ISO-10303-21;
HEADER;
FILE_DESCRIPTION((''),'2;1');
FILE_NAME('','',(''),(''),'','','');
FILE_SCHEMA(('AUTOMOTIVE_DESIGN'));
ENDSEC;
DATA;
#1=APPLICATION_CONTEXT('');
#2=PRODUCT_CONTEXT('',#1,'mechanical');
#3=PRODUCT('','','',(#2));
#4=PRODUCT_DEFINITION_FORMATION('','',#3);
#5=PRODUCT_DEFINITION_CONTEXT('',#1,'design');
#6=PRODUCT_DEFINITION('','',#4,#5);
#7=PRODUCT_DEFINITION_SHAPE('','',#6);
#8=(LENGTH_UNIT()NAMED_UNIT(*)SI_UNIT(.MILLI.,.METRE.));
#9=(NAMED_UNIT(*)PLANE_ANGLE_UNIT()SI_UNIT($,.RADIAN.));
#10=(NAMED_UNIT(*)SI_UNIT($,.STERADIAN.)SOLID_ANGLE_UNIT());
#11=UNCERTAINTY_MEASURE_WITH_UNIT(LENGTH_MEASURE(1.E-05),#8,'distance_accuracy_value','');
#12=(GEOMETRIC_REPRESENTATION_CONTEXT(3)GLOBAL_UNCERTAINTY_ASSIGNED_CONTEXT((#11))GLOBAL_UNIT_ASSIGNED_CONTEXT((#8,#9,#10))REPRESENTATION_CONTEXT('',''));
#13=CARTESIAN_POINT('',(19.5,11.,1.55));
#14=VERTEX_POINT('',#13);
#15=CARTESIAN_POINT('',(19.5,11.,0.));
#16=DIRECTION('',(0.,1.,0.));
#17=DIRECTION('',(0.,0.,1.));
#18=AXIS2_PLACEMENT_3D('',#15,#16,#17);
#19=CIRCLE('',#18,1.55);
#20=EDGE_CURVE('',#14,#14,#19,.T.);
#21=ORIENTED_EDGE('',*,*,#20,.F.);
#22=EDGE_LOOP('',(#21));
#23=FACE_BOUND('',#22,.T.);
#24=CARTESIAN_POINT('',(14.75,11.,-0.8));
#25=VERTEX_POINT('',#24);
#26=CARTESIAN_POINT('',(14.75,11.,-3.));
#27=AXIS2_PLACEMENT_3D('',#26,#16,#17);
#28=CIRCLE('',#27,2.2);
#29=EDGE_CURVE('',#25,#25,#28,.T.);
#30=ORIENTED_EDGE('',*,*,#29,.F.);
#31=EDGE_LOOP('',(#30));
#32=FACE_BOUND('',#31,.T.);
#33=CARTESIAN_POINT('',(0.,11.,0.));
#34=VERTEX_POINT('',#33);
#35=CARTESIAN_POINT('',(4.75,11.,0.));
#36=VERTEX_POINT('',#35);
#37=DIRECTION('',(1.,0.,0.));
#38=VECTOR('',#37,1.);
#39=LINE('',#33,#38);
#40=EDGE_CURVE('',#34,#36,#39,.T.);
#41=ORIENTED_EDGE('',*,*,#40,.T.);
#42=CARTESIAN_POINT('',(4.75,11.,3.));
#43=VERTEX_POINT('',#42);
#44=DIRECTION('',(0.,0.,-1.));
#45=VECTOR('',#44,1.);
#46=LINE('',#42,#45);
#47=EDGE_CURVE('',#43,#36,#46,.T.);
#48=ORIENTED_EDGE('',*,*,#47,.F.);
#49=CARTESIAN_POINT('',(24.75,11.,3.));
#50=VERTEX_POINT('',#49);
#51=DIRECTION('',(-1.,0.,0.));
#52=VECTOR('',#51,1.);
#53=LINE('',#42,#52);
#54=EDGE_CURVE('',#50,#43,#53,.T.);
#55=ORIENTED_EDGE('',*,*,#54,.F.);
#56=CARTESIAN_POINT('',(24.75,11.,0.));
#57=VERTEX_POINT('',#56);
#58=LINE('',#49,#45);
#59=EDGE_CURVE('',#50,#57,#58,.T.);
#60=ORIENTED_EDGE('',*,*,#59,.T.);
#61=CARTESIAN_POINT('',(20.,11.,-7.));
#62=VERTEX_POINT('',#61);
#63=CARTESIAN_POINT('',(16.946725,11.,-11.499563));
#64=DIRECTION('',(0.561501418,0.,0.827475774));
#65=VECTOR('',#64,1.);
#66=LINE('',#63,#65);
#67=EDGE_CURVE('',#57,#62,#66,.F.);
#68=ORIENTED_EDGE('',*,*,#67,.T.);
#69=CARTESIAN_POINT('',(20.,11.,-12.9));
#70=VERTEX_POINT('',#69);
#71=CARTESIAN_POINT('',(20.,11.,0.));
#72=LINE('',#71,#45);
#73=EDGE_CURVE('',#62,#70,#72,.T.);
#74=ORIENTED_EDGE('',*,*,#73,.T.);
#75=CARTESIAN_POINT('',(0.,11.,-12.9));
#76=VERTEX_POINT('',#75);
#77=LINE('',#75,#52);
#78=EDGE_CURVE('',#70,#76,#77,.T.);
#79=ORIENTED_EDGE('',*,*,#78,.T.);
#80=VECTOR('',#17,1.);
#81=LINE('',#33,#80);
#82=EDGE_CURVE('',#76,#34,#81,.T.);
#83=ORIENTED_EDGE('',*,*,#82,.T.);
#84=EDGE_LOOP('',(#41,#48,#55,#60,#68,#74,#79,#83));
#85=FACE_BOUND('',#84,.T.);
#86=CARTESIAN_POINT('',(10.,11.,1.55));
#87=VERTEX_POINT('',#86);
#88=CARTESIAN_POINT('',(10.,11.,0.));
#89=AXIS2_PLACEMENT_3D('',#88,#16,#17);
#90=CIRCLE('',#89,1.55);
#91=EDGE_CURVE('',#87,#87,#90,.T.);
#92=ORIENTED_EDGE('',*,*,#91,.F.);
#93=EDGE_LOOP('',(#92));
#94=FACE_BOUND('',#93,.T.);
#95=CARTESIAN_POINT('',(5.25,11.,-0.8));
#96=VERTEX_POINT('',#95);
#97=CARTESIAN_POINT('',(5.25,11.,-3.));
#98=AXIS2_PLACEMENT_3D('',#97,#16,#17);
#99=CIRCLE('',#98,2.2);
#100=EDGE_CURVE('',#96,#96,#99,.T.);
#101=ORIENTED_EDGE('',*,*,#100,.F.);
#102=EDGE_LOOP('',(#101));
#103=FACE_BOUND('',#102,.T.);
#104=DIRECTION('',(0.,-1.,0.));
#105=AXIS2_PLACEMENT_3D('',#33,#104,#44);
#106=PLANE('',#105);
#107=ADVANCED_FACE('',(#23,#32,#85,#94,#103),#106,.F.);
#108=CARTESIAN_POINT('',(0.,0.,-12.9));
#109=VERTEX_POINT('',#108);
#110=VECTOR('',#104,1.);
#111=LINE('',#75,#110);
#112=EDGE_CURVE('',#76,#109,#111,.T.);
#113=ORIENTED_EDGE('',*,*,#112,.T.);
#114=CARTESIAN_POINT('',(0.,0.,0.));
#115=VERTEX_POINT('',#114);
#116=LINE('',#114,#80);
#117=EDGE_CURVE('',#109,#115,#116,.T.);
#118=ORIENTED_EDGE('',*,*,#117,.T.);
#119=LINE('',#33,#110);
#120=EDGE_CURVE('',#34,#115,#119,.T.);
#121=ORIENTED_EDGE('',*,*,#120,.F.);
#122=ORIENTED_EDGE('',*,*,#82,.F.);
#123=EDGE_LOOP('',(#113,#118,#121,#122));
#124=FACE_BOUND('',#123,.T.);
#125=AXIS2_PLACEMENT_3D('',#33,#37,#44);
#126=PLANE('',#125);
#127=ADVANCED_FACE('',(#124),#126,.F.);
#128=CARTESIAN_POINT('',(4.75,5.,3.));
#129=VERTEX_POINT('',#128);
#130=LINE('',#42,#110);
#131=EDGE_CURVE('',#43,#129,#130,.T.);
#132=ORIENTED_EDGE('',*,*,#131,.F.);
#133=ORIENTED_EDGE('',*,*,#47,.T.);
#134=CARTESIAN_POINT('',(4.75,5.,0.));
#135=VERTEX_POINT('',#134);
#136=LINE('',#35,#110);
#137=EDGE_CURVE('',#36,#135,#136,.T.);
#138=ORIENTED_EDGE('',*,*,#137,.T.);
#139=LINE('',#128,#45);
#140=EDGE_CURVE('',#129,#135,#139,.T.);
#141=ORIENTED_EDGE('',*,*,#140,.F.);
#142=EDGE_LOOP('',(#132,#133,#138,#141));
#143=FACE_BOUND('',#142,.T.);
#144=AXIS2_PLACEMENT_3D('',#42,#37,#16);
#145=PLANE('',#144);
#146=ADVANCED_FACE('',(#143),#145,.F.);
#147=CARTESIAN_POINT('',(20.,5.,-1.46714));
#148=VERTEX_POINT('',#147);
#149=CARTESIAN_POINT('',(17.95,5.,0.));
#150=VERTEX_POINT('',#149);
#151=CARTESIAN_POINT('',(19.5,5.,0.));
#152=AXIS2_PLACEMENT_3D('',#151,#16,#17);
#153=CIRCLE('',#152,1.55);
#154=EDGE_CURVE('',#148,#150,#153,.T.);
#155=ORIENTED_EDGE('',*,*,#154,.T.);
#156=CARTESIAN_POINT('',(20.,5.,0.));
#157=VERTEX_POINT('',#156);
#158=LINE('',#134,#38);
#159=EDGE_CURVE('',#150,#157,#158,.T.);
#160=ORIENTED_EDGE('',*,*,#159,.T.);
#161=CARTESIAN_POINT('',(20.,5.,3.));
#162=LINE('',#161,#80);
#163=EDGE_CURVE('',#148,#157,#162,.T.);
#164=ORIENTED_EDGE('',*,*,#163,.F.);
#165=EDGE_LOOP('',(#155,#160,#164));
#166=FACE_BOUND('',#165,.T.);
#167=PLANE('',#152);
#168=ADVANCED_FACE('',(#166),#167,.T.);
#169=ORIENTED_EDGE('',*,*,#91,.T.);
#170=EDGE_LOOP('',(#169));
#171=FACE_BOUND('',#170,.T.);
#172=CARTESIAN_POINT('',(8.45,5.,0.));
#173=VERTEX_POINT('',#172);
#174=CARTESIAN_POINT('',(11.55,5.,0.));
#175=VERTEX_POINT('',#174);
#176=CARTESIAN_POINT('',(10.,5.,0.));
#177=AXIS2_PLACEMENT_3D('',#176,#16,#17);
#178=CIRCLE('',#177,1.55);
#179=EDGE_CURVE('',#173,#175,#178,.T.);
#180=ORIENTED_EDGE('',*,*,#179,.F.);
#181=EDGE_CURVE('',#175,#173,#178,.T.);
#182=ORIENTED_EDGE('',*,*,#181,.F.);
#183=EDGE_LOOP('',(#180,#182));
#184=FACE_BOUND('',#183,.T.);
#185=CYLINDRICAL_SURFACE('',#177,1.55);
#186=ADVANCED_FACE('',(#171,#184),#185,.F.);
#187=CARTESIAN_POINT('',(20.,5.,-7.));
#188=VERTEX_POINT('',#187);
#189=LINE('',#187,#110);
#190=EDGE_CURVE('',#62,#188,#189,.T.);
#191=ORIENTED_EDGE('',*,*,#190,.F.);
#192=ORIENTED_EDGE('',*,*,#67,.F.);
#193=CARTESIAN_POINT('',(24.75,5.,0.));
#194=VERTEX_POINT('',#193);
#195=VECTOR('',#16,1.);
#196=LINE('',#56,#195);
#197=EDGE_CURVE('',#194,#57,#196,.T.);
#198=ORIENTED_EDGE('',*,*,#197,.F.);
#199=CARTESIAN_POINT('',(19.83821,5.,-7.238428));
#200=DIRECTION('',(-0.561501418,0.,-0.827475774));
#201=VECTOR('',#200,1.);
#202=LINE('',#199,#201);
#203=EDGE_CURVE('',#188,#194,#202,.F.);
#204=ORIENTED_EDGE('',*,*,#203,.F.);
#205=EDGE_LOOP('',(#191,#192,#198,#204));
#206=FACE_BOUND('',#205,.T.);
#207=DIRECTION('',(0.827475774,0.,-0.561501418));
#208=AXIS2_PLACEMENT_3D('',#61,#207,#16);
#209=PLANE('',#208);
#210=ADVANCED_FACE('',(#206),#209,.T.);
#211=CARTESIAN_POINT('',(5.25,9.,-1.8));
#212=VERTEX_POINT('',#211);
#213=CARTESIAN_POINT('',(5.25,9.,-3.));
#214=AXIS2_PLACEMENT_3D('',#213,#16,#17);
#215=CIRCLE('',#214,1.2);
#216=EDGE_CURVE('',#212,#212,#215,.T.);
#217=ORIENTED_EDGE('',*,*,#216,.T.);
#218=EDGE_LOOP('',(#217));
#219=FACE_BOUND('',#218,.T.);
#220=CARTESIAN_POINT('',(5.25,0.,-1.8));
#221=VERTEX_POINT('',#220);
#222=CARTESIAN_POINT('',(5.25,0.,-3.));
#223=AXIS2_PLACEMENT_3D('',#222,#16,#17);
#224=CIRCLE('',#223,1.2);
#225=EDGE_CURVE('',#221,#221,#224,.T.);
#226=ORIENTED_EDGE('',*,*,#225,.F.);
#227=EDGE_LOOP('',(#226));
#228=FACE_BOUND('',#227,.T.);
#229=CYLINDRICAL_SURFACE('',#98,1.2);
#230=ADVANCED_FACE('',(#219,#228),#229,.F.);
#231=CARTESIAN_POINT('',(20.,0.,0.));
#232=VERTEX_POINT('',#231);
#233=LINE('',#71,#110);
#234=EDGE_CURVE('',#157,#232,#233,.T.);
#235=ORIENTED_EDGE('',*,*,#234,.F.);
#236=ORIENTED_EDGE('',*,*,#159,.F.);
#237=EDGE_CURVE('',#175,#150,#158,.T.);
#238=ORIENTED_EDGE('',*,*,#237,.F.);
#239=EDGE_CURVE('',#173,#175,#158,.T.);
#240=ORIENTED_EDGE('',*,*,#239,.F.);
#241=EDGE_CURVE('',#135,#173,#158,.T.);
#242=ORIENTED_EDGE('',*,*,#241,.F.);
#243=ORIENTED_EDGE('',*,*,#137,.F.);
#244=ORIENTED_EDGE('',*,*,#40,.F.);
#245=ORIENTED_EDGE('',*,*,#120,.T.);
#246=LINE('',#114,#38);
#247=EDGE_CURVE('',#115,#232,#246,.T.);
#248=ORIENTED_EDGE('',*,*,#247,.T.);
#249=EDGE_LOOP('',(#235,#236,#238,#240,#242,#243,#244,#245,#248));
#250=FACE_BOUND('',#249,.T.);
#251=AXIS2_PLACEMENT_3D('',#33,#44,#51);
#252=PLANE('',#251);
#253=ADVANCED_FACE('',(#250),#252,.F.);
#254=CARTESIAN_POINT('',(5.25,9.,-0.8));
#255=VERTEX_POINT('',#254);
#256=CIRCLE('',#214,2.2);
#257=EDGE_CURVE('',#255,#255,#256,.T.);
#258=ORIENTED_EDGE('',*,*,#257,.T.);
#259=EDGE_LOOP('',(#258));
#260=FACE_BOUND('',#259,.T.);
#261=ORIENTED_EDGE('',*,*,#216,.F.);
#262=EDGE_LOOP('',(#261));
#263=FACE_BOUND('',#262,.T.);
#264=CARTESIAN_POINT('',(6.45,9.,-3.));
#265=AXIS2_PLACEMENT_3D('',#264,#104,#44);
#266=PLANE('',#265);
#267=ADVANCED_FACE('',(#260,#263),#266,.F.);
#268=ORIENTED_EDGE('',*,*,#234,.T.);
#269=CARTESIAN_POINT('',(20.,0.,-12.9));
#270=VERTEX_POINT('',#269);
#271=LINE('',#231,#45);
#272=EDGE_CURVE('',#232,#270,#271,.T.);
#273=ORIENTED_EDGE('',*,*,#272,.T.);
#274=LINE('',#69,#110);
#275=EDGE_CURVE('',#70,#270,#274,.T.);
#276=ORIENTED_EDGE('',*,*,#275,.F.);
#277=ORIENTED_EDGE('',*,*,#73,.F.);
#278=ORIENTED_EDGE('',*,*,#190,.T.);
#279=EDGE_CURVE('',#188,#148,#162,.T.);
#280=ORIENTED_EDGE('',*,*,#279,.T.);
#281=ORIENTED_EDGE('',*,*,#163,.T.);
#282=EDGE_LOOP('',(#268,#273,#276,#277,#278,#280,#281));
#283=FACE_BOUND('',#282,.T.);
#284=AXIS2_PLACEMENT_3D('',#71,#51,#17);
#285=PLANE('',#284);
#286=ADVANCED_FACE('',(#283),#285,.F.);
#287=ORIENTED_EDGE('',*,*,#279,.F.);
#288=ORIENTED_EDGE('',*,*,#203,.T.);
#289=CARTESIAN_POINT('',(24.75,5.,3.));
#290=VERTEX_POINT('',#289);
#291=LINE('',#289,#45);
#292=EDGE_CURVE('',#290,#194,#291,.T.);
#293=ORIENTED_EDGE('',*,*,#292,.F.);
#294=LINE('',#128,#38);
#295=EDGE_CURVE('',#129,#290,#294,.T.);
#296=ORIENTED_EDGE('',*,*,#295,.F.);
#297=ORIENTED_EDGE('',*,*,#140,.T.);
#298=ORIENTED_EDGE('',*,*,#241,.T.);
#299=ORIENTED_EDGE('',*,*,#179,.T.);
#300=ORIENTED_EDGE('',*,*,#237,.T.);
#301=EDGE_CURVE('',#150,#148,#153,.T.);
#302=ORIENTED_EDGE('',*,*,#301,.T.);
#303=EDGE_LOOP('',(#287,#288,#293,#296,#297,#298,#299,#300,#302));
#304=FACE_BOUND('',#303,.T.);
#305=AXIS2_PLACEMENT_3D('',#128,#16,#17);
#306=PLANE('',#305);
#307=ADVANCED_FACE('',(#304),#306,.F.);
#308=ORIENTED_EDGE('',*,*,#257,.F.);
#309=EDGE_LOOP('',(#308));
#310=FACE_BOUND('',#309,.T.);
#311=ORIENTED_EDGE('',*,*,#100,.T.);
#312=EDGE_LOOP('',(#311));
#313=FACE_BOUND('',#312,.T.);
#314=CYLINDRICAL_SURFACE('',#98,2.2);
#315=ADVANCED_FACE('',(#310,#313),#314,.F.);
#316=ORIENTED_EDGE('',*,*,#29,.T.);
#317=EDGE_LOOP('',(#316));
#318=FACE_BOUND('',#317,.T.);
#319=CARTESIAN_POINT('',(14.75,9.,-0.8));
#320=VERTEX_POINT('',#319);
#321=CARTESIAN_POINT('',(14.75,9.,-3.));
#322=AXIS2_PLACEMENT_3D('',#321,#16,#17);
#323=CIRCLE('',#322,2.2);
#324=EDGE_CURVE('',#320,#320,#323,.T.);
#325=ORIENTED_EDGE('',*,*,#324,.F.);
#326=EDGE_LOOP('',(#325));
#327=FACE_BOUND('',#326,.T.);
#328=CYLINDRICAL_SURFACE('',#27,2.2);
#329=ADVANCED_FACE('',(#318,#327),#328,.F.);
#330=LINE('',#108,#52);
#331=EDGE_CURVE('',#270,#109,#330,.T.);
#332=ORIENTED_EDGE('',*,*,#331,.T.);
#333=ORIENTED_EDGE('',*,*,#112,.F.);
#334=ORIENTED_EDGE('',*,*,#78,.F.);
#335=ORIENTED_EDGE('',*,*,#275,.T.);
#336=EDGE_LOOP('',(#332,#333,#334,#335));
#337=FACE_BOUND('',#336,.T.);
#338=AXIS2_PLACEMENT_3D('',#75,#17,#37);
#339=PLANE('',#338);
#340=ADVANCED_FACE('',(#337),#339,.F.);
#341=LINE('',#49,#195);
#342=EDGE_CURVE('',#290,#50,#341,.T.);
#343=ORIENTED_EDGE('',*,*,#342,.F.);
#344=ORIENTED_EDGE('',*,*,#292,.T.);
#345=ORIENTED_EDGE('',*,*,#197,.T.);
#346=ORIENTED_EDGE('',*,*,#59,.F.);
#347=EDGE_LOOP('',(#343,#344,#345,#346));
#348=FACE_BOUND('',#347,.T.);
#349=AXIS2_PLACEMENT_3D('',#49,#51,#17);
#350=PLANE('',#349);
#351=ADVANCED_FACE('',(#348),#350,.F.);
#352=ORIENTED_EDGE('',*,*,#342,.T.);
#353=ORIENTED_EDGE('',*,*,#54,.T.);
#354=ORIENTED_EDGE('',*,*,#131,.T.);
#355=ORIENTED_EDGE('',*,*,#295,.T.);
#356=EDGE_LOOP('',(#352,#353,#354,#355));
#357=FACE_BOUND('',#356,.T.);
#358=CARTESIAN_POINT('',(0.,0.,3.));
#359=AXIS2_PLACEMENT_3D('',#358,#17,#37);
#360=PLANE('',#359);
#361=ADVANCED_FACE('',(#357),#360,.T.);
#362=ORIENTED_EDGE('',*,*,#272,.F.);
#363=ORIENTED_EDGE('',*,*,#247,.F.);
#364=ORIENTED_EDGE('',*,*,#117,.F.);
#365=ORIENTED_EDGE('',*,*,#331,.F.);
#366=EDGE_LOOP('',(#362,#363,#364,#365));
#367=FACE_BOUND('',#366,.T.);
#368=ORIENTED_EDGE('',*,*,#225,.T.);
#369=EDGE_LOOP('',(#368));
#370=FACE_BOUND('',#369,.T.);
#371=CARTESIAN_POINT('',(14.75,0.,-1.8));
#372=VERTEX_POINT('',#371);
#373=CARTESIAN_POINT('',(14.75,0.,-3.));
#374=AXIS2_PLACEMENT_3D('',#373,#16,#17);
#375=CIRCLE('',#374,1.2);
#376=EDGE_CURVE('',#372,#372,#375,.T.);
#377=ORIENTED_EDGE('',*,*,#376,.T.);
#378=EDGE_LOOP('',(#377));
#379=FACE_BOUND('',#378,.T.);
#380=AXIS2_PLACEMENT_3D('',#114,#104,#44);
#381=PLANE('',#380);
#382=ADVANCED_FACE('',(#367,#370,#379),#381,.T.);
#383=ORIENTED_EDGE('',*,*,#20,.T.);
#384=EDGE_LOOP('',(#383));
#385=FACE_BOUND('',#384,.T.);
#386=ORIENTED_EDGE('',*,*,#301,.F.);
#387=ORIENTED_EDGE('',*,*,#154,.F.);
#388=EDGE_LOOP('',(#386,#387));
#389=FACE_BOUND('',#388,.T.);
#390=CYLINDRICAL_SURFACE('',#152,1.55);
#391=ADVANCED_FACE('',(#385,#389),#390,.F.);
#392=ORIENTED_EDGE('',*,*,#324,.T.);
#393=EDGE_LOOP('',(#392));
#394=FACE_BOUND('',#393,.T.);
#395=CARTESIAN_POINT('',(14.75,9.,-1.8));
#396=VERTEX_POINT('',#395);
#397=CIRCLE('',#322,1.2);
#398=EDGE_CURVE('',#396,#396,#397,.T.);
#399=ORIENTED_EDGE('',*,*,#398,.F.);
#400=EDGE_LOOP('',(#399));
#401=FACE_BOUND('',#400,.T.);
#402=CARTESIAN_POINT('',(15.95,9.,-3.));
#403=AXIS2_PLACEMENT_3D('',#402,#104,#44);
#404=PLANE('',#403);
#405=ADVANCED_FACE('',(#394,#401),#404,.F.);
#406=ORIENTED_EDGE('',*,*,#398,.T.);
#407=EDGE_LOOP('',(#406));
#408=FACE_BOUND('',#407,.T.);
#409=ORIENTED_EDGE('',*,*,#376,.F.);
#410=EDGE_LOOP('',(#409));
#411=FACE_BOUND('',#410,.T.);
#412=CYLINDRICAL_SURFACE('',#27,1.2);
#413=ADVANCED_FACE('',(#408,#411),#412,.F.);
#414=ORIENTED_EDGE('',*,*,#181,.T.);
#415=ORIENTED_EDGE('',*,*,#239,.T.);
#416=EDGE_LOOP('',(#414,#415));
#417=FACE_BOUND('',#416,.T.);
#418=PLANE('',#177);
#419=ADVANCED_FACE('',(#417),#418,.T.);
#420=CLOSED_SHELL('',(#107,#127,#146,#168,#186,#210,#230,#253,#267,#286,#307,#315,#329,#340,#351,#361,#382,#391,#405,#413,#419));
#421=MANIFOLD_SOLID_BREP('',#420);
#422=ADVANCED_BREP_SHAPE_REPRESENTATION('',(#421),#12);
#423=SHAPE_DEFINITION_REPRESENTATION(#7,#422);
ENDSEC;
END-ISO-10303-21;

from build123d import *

# Parameters (mm, degrees)
SKETCH1_W                      = 20
SKETCH1_H                      = 12.9
SKETCH1_R                      = 1.175
BOSS_EXTRUDE1_DEPTH            = 11
SKETCH2_W                      = 20
SKETCH2_H                      = 6
BOSS_EXTRUDE2_DEPTH            = 3
CBORE_FOR_M2_SHCS1_D           = 2.4
CBORE_FOR_M2_SHCS1_CBORE_D     = 4.4
CBORE_FOR_M2_SHCS1_CBORE_DEPTH = 2
CHAMFER1_SIZE2                 = 4.75
CHAMFER1_SIZE                  = 7
SKETCH5_R                      = 1.55
CUT_EXTRUDE1_DEPTH             = 6


with BuildPart() as part:
    # Sketch1 → Boss-Extrude1 (new body)
    with BuildSketch(Plane(origin=(0, 0, 0), x_dir=(1, 0, 0), z_dir=(0, 1, 0))):
        with Locations((10, 6.45)):
            Rectangle(SKETCH1_W, SKETCH1_H)
        with Locations(Location((5.25, 3, 0), (0, 0, 270))):
            Circle(SKETCH1_R, mode=Mode.SUBTRACT)
        with Locations(Location((14.75, 3, 0), (0, 0, 270))):
            Circle(SKETCH1_R, mode=Mode.SUBTRACT)
    extrude(amount=BOSS_EXTRUDE1_DEPTH)

    # Sketch2 → Boss-Extrude2 (add)
    with BuildSketch(Plane.XY):
        with Locations((14.75, 8)):
            Rectangle(SKETCH2_W, SKETCH2_H)
    extrude(amount=BOSS_EXTRUDE2_DEPTH)

    # CBORE for M2 SHCS1 (through all)
    with Locations(Plane(origin=(0, 11, 0), x_dir=(1, 0, 0), z_dir=(0, 1, 0))):
        with Locations((5.25, 3), (14.75, 3)):
            CounterBoreHole(CBORE_FOR_M2_SHCS1_D / 2, CBORE_FOR_M2_SHCS1_CBORE_D / 2, CBORE_FOR_M2_SHCS1_CBORE_DEPTH)

    # Chamfer1
    chamfer1_edges = [part.edges().sort_by_distance(p)[0] for p in [
        (20, 8, 0),
    ]]
    chamfer1_side = [part.faces().sort_by_distance(p)[0] for p in [
        (20, 8, -0.095),
    ]]
    chamfer(chamfer1_edges, length=CHAMFER1_SIZE - 0.0001, length2=CHAMFER1_SIZE2 - 0.0001, reference=chamfer1_side[0])  # a hair under: the kernel refuses the full size

    # Sketch5 → Cut-Extrude1 (cut)
    with BuildSketch(Plane(origin=(0, 11, 0), x_dir=(1, 0, 0), z_dir=(0, 1, 0))):
        with Locations(Location((10, 0, 0), (0, 0, 270))):
            Circle(SKETCH5_R)
        with Locations(Location((19.5, 0, 0), (0, 0, 270))):
            Circle(SKETCH5_R)
    extrude(amount=-CUT_EXTRUDE1_DEPTH, mode=Mode.SUBTRACT)


solid = part.part
